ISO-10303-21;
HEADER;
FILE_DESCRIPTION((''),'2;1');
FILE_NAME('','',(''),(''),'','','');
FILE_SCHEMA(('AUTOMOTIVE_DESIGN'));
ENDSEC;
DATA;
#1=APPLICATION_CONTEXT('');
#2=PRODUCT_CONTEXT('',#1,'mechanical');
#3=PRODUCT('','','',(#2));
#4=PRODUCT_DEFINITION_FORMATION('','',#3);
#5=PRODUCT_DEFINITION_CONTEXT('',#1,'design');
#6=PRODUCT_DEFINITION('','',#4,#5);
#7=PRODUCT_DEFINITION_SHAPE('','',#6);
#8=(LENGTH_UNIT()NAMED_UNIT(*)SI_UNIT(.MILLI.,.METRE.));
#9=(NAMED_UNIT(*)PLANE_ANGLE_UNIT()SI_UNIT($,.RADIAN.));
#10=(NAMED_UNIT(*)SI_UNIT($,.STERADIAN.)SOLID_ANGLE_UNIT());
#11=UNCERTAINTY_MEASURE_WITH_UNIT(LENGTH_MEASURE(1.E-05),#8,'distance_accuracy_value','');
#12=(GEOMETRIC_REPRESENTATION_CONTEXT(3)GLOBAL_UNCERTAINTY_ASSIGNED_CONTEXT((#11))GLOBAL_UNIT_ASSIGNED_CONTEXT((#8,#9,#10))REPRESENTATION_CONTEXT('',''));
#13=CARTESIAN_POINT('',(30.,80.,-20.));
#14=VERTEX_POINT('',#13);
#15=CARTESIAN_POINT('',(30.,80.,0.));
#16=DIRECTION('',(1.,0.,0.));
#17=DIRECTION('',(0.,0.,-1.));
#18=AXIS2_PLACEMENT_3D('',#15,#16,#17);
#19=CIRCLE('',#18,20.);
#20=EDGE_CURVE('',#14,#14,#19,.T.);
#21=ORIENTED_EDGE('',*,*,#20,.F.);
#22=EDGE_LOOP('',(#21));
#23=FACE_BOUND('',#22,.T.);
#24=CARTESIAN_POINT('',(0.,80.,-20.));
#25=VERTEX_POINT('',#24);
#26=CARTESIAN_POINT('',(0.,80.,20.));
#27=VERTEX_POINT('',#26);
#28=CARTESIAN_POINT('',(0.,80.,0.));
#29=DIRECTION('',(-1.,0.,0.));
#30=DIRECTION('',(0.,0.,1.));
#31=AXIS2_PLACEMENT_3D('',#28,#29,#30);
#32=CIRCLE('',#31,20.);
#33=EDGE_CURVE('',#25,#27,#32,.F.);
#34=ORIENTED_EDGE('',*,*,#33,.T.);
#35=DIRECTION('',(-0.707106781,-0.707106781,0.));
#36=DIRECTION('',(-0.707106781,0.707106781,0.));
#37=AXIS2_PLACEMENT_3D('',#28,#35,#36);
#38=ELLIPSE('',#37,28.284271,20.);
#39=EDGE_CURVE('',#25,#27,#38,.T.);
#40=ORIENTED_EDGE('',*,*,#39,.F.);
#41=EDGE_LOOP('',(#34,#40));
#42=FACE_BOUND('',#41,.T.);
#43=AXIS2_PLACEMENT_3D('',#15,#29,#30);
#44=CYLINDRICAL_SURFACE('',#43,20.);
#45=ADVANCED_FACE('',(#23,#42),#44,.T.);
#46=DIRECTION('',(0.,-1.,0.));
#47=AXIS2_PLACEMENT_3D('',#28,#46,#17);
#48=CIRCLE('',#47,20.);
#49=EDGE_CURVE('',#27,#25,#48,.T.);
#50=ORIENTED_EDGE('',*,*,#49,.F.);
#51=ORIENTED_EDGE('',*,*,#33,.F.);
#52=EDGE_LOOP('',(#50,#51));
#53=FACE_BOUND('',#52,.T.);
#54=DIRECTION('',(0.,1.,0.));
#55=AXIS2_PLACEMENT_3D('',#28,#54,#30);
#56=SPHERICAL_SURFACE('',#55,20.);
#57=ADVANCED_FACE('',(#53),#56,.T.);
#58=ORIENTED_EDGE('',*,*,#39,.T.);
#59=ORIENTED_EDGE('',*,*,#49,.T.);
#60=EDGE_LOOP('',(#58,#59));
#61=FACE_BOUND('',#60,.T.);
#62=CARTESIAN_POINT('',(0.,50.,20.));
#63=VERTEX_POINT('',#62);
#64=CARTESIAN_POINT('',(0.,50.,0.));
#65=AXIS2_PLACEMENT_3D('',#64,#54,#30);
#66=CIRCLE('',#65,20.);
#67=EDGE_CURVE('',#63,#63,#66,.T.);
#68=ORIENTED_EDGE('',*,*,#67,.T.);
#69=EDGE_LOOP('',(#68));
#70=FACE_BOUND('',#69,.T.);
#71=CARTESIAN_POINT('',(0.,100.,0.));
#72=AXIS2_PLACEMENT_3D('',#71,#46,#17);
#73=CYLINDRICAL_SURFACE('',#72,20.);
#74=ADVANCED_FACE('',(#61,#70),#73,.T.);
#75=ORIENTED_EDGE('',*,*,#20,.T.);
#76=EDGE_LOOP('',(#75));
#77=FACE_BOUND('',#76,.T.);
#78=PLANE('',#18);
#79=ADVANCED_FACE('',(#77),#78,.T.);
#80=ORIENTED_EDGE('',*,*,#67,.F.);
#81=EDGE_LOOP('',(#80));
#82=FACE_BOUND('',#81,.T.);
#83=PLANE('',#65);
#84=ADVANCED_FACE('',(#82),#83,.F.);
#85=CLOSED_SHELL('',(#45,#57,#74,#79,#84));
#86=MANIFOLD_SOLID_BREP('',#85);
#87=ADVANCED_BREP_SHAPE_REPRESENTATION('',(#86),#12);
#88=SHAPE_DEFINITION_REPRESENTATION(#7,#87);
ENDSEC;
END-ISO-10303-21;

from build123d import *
from build123d.topology import SkipClean

# Parameters (mm, degrees)
BOSS_EXTRUDE3_DEPTH = 50
FILLET1_R           = 20
SKETCH5_R           = 20
BOSS_EXTRUDE4_DEPTH = 30
BOSS_EXTRUDE5_DEPTH = 30


with BuildPart() as part:
    # Sketch4 → Boss-Extrude3 (new body)
    with BuildSketch(Plane(origin=(0, 50, 0), x_dir=(1, 0, 0), z_dir=(0, 1, 0))):
        with BuildLine():
            Line((0, 20), (0, -20))
            ThreePointArc((0, -20), (-20, 0), (0, 20))
        make_face()
    extrude(amount=BOSS_EXTRUDE3_DEPTH)

    # Fillet1
    fillet1_edges = [part.edges().sort_by_distance(p)[0] for p in [
        (-20, 100, 0),
    ]]
    fillet(fillet1_edges, radius=FILLET1_R - 0.0001)  # a hair under: the kernel refuses the full size

    # Sketch5 → Boss-Extrude4 (add)
    with BuildSketch(Plane(origin=(0, 0, 0), x_dir=(0, 0, -1), z_dir=(1, 0, 0))):
        with Locations((0, 80)):
            Circle(SKETCH5_R)
    extrude(amount=BOSS_EXTRUDE4_DEPTH)

    # Sketch6 → Boss-Extrude5 (add)
    with SkipClean():  # the faces are left unmerged after this step: merging them gives an invalid solid
        with BuildSketch(Plane(origin=(0, 50, 0), x_dir=(1, 0, 0), z_dir=(0, 1, 0))):
            with BuildLine():
                Line((0, 20), (0, -20))
                ThreePointArc((0, -20), (20, 0), (0, 20))
            make_face()
        extrude(amount=BOSS_EXTRUDE5_DEPTH)
    add(part.part.scale(1), mode=Mode.REPLACE)  # the faces are merged on a copy


solid = part.part
